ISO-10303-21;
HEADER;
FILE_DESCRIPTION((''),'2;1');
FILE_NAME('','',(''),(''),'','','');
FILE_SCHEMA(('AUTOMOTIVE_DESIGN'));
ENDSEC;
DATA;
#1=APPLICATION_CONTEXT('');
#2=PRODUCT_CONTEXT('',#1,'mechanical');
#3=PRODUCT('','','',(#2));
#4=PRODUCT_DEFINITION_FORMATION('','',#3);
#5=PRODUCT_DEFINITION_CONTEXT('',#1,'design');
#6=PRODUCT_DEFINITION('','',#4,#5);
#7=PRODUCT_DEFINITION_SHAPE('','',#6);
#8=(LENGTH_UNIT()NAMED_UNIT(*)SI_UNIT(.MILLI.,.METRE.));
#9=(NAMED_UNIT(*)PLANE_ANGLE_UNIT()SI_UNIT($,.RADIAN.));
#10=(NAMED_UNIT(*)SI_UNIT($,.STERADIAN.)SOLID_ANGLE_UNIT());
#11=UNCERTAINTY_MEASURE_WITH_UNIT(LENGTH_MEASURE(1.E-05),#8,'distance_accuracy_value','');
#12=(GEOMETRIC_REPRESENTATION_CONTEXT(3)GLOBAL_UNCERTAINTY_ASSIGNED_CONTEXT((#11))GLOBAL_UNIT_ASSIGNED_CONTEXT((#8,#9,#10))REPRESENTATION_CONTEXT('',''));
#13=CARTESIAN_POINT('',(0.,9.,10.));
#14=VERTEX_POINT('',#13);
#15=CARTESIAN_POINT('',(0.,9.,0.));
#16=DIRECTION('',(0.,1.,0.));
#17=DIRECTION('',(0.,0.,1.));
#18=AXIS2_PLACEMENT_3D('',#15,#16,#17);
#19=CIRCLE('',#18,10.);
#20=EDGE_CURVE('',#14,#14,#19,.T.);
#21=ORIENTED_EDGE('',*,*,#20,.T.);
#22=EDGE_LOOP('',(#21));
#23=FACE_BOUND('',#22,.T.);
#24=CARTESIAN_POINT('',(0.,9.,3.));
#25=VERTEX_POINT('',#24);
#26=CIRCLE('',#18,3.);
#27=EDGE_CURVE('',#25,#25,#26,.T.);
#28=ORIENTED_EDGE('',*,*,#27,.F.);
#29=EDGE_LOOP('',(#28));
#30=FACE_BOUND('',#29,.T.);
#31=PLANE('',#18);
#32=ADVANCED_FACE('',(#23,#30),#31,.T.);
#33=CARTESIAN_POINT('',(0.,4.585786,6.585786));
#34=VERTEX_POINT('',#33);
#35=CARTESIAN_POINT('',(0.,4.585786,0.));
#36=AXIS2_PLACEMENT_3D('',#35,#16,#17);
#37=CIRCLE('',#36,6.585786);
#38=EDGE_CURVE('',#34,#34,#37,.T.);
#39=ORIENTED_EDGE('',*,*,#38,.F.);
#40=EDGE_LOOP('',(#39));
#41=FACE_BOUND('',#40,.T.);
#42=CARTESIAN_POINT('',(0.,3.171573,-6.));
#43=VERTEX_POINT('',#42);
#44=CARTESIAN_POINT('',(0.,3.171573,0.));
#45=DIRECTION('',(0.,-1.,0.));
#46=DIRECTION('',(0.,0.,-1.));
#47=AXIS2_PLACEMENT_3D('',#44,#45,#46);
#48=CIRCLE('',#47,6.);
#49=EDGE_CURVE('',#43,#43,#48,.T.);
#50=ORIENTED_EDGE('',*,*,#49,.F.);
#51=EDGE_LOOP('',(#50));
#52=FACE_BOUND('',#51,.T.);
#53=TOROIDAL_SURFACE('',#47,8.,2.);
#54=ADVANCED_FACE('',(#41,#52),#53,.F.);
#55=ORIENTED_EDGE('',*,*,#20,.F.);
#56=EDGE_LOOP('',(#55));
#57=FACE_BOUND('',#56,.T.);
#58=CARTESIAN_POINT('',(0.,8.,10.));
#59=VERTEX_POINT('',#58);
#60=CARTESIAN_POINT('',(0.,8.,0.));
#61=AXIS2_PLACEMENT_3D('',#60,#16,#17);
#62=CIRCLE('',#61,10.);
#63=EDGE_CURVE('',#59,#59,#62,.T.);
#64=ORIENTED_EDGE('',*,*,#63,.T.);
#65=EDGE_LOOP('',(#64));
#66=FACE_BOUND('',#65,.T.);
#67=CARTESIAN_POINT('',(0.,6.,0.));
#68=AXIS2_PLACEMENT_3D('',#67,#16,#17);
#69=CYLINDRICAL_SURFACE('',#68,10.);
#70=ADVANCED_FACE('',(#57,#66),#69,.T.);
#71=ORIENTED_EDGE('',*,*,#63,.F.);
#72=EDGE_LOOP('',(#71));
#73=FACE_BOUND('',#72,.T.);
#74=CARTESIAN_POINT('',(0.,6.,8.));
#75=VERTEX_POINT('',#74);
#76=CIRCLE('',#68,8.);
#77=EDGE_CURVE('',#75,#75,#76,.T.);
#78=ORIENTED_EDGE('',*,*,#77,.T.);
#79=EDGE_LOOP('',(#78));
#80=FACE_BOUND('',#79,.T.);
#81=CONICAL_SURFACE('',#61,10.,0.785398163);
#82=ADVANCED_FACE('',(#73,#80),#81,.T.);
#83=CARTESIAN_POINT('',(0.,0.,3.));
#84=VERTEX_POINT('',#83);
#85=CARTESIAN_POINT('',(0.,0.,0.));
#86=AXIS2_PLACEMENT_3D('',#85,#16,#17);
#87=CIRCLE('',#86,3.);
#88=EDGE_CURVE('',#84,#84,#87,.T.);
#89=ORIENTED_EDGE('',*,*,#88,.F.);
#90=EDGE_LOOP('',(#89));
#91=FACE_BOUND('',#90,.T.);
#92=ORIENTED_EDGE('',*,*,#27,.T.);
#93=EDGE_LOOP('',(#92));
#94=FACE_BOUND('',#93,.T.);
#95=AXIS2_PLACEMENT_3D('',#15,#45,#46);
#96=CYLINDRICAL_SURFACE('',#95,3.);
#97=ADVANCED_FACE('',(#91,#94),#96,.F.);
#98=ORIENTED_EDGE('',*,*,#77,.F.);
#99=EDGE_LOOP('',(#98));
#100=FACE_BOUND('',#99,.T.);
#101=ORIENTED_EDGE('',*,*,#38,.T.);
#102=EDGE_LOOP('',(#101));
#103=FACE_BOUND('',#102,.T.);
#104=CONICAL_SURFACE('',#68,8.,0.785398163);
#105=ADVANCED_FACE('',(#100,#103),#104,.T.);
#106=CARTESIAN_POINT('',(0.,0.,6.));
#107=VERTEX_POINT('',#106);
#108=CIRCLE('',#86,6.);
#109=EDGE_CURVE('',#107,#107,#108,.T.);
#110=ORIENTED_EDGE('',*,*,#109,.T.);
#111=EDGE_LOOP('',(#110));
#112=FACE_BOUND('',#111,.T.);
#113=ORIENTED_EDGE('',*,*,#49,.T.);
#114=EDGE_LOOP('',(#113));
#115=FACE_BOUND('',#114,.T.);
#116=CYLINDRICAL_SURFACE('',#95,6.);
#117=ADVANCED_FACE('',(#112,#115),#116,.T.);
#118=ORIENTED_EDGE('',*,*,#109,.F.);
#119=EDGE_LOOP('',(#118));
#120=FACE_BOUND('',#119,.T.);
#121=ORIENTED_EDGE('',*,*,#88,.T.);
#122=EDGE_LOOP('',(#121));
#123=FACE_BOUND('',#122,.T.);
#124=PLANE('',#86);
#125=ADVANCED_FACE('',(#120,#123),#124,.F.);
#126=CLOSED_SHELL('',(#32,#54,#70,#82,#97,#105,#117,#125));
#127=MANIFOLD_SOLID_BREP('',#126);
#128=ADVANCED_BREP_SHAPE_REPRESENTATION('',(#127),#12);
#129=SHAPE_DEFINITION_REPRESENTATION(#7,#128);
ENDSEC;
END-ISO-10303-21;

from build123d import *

# Parameters (mm, degrees)
SKETCH1_R           = 6
SKETCH1_R_2         = 3
BOSS_EXTRUDE1_DEPTH = 9
BOSS_EXTRUDE2_START = -3
SKETCH2_R           = 10
SKETCH2_R_2         = 3
BOSS_EXTRUDE2_DEPTH = 3
CHAMFER1_SIZE       = 2
FILLET1_R           = 2


with BuildPart() as part:
    # Sketch1 → Boss-Extrude1 (new body)
    with BuildSketch(Plane(origin=(0, 0, 0), x_dir=(1, 0, 0), z_dir=(0, 1, 0))):
        with Locations(Location((0, 0, 0), (0, 0, 270))):
            Circle(SKETCH1_R)
        with Locations(Location((0, 0, 0), (0, 0, 270))):
            Circle(SKETCH1_R_2, mode=Mode.SUBTRACT)
    extrude(amount=BOSS_EXTRUDE1_DEPTH)

    # Sketch2 → Boss-Extrude2 (add)
    with BuildSketch(Plane(origin=(0, 9, 0), x_dir=(1, 0, 0), z_dir=(0, 1, 0)).offset(BOSS_EXTRUDE2_START)):
        with Locations(Location((0, 0, 0), (0, 0, 270))):
            Circle(SKETCH2_R)
        with Locations(Location((0, 0, 0), (0, 0, 270))):
            Circle(SKETCH2_R_2, mode=Mode.SUBTRACT)
    extrude(amount=BOSS_EXTRUDE2_DEPTH)

    # Chamfer1
    chamfer1_edges = [part.edges().sort_by_distance(p)[0] for p in [
        (0, 6, -6),
        (0, 6, -10),
    ]]
    chamfer(chamfer1_edges, length=CHAMFER1_SIZE - 0.0001)  # a hair under: the kernel refuses the full size

    # Fillet1
    fillet1_edges = [part.edges().sort_by_distance(p)[0] for p in [
        (0, 4.0001, -6),
    ]]
    fillet(fillet1_edges, radius=FILLET1_R)


solid = part.part
